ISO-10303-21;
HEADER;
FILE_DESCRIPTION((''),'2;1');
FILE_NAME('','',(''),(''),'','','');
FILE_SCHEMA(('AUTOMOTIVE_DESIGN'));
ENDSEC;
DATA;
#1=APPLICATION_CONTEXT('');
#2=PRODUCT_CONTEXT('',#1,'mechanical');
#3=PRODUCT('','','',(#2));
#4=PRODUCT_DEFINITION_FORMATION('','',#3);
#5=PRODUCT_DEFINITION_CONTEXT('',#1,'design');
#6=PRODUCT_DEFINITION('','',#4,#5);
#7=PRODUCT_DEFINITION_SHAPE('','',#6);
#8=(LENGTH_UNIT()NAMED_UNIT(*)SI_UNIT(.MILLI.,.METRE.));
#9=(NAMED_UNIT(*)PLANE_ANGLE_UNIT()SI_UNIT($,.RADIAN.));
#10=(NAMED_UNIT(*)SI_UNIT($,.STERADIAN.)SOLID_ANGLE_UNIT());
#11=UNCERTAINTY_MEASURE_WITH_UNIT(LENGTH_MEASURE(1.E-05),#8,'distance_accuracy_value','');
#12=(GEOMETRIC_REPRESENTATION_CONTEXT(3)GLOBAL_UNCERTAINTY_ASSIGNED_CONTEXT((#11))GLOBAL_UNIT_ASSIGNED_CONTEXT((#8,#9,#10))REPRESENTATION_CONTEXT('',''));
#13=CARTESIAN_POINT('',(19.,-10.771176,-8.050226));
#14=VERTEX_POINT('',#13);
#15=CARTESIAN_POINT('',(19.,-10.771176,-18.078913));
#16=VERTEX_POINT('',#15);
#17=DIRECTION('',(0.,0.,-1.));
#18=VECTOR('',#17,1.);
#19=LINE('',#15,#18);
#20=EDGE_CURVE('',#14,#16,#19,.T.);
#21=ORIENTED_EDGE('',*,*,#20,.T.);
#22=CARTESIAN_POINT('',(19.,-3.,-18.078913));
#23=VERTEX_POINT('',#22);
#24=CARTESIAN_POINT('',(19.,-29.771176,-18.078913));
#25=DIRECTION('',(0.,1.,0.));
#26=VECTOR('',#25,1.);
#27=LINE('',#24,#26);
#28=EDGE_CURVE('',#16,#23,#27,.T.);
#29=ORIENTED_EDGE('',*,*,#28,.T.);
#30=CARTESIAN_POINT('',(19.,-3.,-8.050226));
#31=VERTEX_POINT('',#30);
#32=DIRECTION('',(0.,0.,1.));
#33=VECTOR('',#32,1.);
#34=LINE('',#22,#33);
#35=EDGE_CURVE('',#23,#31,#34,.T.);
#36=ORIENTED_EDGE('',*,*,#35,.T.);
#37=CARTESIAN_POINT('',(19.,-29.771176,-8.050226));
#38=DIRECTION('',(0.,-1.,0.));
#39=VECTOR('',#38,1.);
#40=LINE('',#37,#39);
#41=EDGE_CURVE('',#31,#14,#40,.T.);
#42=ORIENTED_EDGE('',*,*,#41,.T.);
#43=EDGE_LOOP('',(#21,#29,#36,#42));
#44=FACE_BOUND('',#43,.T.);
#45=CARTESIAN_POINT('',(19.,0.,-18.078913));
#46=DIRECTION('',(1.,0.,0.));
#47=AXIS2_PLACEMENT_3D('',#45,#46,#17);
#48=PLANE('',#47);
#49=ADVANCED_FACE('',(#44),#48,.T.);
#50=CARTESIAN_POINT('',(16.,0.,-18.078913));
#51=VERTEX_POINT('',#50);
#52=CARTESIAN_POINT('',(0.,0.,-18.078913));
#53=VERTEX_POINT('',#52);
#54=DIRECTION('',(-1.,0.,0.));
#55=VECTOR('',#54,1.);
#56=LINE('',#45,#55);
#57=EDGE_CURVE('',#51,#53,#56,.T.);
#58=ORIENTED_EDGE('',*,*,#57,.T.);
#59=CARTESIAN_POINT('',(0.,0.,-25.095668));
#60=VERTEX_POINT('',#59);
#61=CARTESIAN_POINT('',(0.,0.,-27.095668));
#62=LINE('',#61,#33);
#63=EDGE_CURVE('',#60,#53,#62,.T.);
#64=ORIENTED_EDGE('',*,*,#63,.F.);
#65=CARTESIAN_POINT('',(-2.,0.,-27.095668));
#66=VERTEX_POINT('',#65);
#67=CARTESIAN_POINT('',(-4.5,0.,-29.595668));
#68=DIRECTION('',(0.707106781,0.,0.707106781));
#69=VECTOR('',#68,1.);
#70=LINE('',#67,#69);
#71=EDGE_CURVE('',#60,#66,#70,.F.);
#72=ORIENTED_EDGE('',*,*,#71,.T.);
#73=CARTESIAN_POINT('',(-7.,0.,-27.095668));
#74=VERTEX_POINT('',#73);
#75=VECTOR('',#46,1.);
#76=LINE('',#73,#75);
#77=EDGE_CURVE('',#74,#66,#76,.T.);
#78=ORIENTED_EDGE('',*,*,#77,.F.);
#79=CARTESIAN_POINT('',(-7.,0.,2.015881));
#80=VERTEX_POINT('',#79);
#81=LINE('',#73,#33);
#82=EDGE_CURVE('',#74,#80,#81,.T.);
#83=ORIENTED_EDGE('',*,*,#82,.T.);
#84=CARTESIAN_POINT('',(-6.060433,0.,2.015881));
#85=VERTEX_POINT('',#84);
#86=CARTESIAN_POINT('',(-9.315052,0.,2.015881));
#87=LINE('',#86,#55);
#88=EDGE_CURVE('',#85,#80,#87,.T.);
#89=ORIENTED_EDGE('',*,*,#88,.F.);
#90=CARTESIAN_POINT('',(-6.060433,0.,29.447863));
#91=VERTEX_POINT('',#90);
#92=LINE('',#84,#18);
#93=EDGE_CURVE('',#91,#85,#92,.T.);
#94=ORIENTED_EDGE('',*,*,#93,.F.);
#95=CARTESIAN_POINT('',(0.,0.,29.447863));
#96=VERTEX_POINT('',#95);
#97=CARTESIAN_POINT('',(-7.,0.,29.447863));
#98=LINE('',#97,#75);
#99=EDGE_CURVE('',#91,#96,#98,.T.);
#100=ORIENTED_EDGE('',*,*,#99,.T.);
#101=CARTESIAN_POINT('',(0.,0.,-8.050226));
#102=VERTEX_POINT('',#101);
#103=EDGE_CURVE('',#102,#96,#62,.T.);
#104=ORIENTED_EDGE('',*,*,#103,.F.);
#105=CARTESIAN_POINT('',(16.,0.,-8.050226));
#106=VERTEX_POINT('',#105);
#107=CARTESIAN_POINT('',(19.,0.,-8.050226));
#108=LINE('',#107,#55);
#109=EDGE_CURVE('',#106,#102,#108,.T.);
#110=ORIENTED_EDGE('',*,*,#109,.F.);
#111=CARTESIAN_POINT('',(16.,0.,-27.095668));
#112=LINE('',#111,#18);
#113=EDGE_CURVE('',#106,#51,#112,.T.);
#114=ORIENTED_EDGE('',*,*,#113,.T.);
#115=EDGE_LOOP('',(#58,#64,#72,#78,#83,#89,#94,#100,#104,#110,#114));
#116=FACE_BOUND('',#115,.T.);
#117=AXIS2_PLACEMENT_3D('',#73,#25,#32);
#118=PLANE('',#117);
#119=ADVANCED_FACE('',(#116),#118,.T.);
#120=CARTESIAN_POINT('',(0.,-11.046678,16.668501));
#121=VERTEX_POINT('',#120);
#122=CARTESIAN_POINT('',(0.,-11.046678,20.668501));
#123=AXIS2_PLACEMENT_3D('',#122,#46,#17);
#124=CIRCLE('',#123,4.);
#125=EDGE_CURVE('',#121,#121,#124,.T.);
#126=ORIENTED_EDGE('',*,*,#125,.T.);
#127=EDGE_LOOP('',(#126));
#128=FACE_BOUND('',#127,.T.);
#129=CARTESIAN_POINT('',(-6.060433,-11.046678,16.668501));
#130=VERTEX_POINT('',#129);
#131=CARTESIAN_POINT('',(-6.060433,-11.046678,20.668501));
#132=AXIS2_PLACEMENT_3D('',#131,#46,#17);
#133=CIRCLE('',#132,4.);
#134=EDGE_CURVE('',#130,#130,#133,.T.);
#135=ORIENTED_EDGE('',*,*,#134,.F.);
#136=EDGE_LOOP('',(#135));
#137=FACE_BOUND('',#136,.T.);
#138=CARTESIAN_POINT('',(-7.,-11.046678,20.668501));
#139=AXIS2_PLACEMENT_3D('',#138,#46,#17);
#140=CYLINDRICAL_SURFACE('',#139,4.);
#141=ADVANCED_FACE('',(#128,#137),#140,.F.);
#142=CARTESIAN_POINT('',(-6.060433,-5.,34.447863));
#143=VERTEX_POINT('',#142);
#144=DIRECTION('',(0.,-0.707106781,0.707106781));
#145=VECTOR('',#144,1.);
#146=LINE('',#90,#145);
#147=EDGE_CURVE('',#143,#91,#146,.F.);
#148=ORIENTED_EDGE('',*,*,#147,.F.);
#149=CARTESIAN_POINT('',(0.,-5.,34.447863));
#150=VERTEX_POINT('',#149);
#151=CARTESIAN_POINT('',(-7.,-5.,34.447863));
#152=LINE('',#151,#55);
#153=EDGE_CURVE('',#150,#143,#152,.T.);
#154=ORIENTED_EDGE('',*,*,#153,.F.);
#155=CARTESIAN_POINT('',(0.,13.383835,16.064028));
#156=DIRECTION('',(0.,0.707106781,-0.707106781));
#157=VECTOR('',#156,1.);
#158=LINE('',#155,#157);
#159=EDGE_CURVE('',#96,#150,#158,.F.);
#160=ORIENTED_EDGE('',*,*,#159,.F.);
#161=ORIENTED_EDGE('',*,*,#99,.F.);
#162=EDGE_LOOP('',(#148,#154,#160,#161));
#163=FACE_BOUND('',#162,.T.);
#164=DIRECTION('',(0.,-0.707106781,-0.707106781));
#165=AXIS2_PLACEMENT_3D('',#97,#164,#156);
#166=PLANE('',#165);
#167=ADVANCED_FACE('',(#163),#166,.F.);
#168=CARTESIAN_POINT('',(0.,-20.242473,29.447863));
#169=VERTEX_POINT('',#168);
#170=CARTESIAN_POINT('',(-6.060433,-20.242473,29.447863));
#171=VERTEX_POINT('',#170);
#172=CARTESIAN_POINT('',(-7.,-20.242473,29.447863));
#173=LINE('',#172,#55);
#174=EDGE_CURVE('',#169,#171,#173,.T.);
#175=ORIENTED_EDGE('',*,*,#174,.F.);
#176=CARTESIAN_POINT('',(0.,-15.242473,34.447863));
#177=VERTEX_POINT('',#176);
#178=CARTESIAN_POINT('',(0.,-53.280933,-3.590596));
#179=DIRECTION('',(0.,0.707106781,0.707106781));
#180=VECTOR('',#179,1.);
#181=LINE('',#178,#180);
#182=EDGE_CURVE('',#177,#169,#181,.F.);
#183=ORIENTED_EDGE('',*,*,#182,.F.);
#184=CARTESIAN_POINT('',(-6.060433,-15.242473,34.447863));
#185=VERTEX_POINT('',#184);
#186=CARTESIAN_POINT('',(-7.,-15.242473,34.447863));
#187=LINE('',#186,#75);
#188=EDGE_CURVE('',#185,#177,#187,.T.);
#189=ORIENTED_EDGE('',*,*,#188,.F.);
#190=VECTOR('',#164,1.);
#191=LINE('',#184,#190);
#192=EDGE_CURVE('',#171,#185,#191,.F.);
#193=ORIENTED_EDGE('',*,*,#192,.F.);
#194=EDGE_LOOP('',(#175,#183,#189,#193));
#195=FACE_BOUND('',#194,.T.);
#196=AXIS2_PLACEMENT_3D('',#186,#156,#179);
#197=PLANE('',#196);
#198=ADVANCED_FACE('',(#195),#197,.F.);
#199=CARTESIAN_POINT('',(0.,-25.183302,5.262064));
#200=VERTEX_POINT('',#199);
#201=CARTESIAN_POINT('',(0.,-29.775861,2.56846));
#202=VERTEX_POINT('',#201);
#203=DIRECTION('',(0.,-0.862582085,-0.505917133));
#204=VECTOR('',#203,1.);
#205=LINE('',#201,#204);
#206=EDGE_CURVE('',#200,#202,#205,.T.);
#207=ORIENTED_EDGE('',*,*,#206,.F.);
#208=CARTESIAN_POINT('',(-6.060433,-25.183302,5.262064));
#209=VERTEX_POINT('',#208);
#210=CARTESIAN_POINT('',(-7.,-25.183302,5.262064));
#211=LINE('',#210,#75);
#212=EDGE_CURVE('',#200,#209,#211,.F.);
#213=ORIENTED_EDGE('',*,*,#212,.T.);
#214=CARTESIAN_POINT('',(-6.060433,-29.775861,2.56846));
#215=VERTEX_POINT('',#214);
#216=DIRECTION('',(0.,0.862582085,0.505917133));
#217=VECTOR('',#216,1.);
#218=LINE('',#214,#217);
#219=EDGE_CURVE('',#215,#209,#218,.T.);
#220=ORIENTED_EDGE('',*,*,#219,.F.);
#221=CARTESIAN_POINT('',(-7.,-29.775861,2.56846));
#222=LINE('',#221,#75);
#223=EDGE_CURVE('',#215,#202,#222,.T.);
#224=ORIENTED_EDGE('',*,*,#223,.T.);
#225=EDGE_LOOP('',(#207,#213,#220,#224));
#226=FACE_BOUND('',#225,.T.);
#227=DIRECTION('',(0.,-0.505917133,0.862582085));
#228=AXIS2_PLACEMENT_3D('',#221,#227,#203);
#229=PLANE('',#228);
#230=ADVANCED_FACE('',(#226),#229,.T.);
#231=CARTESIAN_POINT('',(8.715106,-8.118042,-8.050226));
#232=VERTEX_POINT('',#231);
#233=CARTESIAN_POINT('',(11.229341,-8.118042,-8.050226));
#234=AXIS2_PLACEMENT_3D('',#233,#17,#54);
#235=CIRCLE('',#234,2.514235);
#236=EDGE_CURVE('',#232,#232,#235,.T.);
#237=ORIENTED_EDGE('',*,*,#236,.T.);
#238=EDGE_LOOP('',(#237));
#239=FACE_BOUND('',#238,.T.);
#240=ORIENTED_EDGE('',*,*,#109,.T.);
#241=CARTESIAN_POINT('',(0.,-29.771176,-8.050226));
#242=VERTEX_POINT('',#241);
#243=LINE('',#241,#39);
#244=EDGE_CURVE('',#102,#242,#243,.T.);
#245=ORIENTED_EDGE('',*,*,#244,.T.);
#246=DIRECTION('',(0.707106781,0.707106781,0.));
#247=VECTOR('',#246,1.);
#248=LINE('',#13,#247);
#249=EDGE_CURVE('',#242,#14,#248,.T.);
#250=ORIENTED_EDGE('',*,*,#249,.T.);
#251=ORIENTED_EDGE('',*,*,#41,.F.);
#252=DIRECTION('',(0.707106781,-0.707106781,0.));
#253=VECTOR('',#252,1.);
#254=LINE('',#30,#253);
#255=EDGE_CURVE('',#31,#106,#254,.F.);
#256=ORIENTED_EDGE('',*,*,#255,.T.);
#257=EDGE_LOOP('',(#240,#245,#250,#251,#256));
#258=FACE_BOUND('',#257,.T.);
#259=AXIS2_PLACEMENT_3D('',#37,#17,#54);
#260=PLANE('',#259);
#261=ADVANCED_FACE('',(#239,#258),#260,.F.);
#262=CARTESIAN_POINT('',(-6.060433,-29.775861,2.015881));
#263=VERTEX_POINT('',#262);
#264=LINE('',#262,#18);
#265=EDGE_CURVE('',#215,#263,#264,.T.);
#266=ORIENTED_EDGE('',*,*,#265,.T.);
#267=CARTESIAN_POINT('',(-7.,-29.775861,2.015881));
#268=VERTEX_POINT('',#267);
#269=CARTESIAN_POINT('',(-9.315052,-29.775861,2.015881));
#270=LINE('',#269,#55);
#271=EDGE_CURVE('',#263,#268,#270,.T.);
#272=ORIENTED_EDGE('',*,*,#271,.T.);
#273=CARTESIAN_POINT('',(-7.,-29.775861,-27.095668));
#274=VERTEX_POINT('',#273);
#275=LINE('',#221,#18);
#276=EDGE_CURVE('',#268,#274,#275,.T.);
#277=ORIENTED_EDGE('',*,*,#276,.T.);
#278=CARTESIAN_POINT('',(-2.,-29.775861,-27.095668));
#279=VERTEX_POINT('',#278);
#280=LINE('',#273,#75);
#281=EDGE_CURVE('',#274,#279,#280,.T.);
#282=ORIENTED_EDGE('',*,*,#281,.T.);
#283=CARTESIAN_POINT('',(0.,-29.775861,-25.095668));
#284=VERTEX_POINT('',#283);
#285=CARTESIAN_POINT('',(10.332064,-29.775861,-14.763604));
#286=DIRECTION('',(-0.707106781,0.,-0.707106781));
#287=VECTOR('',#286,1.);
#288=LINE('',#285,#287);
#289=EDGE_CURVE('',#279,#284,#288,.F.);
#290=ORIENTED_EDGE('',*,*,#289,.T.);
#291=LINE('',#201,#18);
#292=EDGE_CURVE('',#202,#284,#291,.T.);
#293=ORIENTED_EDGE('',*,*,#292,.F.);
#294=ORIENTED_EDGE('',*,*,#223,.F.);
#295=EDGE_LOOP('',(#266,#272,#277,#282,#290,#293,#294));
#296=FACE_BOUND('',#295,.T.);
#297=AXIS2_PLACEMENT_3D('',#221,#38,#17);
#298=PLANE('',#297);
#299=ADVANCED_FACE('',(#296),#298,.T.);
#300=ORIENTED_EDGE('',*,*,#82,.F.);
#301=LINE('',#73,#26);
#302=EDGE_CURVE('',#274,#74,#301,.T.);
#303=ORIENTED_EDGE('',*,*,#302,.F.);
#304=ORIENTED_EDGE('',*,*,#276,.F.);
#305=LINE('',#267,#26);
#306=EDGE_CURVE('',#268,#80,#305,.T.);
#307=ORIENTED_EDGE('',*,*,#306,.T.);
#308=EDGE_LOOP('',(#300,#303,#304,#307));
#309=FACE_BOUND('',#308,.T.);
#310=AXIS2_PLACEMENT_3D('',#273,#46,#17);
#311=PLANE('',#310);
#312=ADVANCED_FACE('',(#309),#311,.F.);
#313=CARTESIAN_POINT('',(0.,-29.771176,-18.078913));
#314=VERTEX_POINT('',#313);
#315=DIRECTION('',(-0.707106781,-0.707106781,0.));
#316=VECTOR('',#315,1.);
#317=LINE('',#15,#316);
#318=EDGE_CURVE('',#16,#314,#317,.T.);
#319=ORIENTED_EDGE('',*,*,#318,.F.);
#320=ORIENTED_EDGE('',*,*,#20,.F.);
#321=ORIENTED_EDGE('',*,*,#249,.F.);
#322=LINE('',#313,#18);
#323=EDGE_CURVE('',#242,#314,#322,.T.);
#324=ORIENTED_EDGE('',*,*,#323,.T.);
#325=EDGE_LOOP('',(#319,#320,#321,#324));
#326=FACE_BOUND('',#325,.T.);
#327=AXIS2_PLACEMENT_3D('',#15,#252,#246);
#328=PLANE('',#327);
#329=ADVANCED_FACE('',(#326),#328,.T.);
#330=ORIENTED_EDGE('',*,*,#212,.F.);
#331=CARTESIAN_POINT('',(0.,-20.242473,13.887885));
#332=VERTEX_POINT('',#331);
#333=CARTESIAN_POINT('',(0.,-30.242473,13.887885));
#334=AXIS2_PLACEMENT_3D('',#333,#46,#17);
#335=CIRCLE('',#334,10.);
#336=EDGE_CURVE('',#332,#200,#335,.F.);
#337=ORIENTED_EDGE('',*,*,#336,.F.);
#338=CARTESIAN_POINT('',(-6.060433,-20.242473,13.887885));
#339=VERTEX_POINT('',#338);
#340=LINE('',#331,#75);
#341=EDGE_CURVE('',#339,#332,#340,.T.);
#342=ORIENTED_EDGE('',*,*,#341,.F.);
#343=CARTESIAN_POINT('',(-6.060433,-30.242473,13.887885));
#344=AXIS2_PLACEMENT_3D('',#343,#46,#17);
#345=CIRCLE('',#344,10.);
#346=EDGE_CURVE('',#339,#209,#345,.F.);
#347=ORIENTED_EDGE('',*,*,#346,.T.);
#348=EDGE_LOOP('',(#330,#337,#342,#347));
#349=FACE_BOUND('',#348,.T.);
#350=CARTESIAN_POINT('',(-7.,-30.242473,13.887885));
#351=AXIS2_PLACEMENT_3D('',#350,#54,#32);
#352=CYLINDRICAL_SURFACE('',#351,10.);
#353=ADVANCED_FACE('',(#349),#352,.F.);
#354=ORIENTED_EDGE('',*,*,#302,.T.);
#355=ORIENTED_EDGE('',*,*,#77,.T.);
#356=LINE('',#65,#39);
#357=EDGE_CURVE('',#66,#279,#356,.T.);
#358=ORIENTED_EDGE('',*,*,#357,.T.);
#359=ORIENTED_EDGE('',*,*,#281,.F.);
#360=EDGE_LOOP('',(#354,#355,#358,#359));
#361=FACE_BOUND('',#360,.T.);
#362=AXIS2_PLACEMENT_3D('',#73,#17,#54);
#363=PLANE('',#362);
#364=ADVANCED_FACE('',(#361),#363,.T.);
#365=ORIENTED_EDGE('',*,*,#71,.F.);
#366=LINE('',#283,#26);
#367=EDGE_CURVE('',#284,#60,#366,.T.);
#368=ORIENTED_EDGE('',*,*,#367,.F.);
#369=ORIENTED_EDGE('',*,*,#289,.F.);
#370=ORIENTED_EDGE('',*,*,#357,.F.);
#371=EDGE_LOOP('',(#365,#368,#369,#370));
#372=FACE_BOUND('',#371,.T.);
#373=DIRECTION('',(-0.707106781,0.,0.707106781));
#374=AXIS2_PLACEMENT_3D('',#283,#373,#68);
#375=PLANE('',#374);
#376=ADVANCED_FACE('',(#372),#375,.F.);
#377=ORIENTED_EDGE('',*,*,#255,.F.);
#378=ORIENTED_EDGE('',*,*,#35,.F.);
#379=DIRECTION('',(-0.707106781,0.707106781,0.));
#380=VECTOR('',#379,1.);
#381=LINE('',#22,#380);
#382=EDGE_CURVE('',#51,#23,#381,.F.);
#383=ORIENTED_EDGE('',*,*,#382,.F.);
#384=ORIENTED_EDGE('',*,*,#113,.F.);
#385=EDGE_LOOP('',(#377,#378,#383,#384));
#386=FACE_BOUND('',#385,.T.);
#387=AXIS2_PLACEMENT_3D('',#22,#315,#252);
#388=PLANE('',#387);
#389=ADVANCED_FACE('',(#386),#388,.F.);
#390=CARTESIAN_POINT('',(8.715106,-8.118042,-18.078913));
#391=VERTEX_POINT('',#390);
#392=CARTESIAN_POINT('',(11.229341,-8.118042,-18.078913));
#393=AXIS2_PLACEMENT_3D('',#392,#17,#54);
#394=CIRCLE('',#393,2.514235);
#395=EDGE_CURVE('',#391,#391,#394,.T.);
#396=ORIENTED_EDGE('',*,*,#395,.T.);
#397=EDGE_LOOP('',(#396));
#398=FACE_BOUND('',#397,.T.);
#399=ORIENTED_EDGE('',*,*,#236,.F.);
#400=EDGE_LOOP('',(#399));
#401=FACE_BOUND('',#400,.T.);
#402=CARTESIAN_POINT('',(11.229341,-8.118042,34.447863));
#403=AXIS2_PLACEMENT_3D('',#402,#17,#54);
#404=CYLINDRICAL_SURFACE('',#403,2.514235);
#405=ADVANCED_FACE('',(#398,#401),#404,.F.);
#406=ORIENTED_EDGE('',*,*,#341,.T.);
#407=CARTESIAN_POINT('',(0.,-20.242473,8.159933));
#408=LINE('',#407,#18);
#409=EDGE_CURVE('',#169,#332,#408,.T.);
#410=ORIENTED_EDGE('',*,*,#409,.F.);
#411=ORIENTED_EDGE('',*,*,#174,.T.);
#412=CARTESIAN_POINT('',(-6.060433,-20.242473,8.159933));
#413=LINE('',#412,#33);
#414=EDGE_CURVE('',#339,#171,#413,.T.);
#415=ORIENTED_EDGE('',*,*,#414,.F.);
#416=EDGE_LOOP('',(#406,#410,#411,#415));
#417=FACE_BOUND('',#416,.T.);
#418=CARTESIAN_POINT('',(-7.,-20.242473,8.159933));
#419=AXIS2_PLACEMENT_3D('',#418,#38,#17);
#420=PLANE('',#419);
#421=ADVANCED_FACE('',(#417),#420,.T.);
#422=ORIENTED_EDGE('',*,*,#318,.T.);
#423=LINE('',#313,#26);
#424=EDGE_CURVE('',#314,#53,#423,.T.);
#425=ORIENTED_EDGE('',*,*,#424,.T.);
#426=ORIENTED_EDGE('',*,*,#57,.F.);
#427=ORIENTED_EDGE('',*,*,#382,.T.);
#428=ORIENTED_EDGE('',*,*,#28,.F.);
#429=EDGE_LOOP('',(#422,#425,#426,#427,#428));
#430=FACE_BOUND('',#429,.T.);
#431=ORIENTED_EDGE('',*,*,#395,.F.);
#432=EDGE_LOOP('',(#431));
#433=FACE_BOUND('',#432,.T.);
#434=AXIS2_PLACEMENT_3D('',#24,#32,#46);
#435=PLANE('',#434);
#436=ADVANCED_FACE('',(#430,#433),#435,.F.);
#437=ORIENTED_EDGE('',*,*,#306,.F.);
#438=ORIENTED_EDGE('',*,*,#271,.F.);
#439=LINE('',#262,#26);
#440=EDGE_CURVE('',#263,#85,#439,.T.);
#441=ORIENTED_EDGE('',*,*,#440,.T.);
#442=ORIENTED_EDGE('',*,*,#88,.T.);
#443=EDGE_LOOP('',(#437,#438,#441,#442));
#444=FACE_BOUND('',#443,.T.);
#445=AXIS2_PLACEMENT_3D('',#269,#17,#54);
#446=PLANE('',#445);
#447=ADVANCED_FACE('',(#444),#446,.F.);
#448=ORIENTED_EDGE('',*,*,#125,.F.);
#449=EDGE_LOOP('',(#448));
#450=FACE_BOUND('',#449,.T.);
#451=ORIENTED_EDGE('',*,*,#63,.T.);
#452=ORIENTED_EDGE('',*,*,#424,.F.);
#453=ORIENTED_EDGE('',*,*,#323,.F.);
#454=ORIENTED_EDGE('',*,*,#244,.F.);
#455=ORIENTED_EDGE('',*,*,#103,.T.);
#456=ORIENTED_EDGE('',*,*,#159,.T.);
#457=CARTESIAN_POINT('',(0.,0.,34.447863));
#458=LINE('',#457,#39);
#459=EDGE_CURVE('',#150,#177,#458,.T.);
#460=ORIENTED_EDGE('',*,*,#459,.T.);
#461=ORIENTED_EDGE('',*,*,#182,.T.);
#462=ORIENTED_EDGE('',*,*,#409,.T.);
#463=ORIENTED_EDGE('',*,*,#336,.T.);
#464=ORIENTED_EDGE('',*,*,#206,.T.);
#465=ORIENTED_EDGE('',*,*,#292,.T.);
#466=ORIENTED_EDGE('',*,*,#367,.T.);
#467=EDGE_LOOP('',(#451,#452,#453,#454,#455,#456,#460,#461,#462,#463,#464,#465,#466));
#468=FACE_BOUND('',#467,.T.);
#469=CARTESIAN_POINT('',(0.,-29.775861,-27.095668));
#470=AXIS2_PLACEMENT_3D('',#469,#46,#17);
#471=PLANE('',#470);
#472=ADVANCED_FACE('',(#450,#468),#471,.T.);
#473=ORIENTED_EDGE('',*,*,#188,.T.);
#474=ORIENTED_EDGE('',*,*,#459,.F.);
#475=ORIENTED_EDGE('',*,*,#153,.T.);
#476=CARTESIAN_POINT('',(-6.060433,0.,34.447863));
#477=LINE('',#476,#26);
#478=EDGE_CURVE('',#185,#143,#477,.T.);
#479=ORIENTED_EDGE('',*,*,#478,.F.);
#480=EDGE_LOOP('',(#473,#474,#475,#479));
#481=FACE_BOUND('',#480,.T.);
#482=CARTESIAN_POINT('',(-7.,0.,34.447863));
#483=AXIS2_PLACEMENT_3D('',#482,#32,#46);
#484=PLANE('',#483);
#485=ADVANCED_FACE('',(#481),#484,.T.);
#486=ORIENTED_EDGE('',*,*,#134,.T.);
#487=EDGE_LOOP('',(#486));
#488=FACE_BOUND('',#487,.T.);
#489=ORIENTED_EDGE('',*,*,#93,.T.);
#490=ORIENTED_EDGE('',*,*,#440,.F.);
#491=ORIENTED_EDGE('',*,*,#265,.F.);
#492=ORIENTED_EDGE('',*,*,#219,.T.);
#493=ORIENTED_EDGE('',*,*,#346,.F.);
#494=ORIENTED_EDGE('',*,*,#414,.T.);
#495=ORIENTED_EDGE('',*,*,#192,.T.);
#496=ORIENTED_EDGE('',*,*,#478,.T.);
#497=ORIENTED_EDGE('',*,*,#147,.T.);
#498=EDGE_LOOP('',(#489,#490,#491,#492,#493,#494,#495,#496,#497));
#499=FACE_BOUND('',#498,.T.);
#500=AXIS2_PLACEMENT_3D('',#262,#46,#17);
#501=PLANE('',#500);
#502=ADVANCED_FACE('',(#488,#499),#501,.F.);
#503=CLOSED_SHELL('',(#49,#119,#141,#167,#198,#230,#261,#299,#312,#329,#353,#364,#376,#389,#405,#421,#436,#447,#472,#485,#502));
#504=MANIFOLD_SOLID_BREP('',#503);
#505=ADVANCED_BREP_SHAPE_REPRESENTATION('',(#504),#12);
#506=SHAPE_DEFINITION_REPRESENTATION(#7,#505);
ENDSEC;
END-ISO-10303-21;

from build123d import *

# Parameters (mm, degrees)
EXTRUDE_1_DEPTH     = 7
FILLET_1_R          = 10
CHAMFER_1_SIZE      = 5
SKETCH_3_W          = 3.25461804
SKETCH_3_H          = 54.107720412
CUT_EXTRUDE_2_DEPTH = 47.067962478
SKETCH_4_R          = 4
CUT_EXTRUDE_3_DEPTH = 47.067962478
SKETCH_5_W          = 10.028686974
SKETCH_5_H          = 29.771176491
EXTRUDE_2_DEPTH     = 19
CHAMFER_3_SIZE      = 19
CHAMFER_4_SIZE      = 3
SKETCH_6_R          = 2.514235327
CUT_EXTRUDE_4_DEPTH = 64.298215394
CHAMFER_5_SIZE      = 2


with BuildPart() as part:
    # Эскиз1 → Вытянуть1 (new body)
    with BuildSketch(Plane(origin=(0, 0, 0), x_dir=(0, 0, -1), z_dir=(1, 0, 0))):
        Polygon((-2.568460462, -29.775860751), (-8.159933039, -20.242473248), (-34.447863263, -20.242473248), (-34.447863263, 0), (27.095667874, 0), (27.095667874, -29.775860751), align=None)
    extrude(amount=-EXTRUDE_1_DEPTH)

    # Скругление1
    fillet_1_edges = [part.edges().sort_by_distance(p)[0] for p in [
        (-3.5, -20.242473248, 8.159933039),
    ]]
    fillet(fillet_1_edges, radius=FILLET_1_R)

    # Фаска1
    chamfer_1_edges = [part.edges().sort_by_distance(p)[0] for p in [
        (-3.5, -20.242473248, 34.447863263),
        (-3.5, 0, 34.447863263),
    ]]
    chamfer(chamfer_1_edges, length=CHAMFER_1_SIZE)

    # Эскиз3 → Вырез-Вытянуть2 (cut, through all)
    with BuildSketch(Plane(origin=(0, 0, 0), x_dir=(1, 0, 0), z_dir=(0, 1, 0))):
        with Locations((-7.6877425, -29.069741347)):
            Rectangle(SKETCH_3_W, SKETCH_3_H)
    extrude(amount=-CUT_EXTRUDE_2_DEPTH, mode=Mode.SUBTRACT)

    # Эскиз4 → Вырез-Вытянуть3 (cut, through all)
    with BuildSketch(Plane(origin=(0, 0, 0), x_dir=(0, 0, -1), z_dir=(1, 0, 0))):
        with Locations((-20.668500614, -11.046677749)):
            Circle(SKETCH_4_R)
    extrude(amount=-CUT_EXTRUDE_3_DEPTH, mode=Mode.SUBTRACT)

    # Эскиз5 → Вытянуть2 (add)
    with BuildSketch(Plane(origin=(0, 0, 0), x_dir=(0, 0, -1), z_dir=(1, 0, 0))):
        with Locations((13.06456917, -14.885588246)):
            Rectangle(SKETCH_5_W, SKETCH_5_H)
    extrude(amount=EXTRUDE_2_DEPTH)

    # Фаска3
    chamfer_3_edges = [part.edges().sort_by_distance(p)[0] for p in [
        (19, -29.771176491, -13.06456917),
    ]]
    chamfer(chamfer_3_edges, length=CHAMFER_3_SIZE - 0.0001)  # a hair under: the kernel refuses the full size

    # Фаска4
    chamfer_4_edges = [part.edges().sort_by_distance(p)[0] for p in [
        (19, 0, -13.06456917),
    ]]
    chamfer(chamfer_4_edges, length=CHAMFER_4_SIZE)

    # Эскиз6 → Вырез-Вытянуть4 (cut, through all)
    with BuildSketch(Plane(origin=(0, 0, -18.078912657), x_dir=(-1, 0, 0), z_dir=(0, 0, -1))):
        with Locations((-11.229341263, -8.118042122)):
            Circle(SKETCH_6_R)
    extrude(amount=-CUT_EXTRUDE_4_DEPTH, mode=Mode.SUBTRACT)

    # Фаска5
    chamfer_5_edges = [part.edges().sort_by_distance(p)[0] for p in [
        (0, -14.887930375, -27.095667874),
    ]]
    chamfer(chamfer_5_edges, length=CHAMFER_5_SIZE)


solid = part.part
